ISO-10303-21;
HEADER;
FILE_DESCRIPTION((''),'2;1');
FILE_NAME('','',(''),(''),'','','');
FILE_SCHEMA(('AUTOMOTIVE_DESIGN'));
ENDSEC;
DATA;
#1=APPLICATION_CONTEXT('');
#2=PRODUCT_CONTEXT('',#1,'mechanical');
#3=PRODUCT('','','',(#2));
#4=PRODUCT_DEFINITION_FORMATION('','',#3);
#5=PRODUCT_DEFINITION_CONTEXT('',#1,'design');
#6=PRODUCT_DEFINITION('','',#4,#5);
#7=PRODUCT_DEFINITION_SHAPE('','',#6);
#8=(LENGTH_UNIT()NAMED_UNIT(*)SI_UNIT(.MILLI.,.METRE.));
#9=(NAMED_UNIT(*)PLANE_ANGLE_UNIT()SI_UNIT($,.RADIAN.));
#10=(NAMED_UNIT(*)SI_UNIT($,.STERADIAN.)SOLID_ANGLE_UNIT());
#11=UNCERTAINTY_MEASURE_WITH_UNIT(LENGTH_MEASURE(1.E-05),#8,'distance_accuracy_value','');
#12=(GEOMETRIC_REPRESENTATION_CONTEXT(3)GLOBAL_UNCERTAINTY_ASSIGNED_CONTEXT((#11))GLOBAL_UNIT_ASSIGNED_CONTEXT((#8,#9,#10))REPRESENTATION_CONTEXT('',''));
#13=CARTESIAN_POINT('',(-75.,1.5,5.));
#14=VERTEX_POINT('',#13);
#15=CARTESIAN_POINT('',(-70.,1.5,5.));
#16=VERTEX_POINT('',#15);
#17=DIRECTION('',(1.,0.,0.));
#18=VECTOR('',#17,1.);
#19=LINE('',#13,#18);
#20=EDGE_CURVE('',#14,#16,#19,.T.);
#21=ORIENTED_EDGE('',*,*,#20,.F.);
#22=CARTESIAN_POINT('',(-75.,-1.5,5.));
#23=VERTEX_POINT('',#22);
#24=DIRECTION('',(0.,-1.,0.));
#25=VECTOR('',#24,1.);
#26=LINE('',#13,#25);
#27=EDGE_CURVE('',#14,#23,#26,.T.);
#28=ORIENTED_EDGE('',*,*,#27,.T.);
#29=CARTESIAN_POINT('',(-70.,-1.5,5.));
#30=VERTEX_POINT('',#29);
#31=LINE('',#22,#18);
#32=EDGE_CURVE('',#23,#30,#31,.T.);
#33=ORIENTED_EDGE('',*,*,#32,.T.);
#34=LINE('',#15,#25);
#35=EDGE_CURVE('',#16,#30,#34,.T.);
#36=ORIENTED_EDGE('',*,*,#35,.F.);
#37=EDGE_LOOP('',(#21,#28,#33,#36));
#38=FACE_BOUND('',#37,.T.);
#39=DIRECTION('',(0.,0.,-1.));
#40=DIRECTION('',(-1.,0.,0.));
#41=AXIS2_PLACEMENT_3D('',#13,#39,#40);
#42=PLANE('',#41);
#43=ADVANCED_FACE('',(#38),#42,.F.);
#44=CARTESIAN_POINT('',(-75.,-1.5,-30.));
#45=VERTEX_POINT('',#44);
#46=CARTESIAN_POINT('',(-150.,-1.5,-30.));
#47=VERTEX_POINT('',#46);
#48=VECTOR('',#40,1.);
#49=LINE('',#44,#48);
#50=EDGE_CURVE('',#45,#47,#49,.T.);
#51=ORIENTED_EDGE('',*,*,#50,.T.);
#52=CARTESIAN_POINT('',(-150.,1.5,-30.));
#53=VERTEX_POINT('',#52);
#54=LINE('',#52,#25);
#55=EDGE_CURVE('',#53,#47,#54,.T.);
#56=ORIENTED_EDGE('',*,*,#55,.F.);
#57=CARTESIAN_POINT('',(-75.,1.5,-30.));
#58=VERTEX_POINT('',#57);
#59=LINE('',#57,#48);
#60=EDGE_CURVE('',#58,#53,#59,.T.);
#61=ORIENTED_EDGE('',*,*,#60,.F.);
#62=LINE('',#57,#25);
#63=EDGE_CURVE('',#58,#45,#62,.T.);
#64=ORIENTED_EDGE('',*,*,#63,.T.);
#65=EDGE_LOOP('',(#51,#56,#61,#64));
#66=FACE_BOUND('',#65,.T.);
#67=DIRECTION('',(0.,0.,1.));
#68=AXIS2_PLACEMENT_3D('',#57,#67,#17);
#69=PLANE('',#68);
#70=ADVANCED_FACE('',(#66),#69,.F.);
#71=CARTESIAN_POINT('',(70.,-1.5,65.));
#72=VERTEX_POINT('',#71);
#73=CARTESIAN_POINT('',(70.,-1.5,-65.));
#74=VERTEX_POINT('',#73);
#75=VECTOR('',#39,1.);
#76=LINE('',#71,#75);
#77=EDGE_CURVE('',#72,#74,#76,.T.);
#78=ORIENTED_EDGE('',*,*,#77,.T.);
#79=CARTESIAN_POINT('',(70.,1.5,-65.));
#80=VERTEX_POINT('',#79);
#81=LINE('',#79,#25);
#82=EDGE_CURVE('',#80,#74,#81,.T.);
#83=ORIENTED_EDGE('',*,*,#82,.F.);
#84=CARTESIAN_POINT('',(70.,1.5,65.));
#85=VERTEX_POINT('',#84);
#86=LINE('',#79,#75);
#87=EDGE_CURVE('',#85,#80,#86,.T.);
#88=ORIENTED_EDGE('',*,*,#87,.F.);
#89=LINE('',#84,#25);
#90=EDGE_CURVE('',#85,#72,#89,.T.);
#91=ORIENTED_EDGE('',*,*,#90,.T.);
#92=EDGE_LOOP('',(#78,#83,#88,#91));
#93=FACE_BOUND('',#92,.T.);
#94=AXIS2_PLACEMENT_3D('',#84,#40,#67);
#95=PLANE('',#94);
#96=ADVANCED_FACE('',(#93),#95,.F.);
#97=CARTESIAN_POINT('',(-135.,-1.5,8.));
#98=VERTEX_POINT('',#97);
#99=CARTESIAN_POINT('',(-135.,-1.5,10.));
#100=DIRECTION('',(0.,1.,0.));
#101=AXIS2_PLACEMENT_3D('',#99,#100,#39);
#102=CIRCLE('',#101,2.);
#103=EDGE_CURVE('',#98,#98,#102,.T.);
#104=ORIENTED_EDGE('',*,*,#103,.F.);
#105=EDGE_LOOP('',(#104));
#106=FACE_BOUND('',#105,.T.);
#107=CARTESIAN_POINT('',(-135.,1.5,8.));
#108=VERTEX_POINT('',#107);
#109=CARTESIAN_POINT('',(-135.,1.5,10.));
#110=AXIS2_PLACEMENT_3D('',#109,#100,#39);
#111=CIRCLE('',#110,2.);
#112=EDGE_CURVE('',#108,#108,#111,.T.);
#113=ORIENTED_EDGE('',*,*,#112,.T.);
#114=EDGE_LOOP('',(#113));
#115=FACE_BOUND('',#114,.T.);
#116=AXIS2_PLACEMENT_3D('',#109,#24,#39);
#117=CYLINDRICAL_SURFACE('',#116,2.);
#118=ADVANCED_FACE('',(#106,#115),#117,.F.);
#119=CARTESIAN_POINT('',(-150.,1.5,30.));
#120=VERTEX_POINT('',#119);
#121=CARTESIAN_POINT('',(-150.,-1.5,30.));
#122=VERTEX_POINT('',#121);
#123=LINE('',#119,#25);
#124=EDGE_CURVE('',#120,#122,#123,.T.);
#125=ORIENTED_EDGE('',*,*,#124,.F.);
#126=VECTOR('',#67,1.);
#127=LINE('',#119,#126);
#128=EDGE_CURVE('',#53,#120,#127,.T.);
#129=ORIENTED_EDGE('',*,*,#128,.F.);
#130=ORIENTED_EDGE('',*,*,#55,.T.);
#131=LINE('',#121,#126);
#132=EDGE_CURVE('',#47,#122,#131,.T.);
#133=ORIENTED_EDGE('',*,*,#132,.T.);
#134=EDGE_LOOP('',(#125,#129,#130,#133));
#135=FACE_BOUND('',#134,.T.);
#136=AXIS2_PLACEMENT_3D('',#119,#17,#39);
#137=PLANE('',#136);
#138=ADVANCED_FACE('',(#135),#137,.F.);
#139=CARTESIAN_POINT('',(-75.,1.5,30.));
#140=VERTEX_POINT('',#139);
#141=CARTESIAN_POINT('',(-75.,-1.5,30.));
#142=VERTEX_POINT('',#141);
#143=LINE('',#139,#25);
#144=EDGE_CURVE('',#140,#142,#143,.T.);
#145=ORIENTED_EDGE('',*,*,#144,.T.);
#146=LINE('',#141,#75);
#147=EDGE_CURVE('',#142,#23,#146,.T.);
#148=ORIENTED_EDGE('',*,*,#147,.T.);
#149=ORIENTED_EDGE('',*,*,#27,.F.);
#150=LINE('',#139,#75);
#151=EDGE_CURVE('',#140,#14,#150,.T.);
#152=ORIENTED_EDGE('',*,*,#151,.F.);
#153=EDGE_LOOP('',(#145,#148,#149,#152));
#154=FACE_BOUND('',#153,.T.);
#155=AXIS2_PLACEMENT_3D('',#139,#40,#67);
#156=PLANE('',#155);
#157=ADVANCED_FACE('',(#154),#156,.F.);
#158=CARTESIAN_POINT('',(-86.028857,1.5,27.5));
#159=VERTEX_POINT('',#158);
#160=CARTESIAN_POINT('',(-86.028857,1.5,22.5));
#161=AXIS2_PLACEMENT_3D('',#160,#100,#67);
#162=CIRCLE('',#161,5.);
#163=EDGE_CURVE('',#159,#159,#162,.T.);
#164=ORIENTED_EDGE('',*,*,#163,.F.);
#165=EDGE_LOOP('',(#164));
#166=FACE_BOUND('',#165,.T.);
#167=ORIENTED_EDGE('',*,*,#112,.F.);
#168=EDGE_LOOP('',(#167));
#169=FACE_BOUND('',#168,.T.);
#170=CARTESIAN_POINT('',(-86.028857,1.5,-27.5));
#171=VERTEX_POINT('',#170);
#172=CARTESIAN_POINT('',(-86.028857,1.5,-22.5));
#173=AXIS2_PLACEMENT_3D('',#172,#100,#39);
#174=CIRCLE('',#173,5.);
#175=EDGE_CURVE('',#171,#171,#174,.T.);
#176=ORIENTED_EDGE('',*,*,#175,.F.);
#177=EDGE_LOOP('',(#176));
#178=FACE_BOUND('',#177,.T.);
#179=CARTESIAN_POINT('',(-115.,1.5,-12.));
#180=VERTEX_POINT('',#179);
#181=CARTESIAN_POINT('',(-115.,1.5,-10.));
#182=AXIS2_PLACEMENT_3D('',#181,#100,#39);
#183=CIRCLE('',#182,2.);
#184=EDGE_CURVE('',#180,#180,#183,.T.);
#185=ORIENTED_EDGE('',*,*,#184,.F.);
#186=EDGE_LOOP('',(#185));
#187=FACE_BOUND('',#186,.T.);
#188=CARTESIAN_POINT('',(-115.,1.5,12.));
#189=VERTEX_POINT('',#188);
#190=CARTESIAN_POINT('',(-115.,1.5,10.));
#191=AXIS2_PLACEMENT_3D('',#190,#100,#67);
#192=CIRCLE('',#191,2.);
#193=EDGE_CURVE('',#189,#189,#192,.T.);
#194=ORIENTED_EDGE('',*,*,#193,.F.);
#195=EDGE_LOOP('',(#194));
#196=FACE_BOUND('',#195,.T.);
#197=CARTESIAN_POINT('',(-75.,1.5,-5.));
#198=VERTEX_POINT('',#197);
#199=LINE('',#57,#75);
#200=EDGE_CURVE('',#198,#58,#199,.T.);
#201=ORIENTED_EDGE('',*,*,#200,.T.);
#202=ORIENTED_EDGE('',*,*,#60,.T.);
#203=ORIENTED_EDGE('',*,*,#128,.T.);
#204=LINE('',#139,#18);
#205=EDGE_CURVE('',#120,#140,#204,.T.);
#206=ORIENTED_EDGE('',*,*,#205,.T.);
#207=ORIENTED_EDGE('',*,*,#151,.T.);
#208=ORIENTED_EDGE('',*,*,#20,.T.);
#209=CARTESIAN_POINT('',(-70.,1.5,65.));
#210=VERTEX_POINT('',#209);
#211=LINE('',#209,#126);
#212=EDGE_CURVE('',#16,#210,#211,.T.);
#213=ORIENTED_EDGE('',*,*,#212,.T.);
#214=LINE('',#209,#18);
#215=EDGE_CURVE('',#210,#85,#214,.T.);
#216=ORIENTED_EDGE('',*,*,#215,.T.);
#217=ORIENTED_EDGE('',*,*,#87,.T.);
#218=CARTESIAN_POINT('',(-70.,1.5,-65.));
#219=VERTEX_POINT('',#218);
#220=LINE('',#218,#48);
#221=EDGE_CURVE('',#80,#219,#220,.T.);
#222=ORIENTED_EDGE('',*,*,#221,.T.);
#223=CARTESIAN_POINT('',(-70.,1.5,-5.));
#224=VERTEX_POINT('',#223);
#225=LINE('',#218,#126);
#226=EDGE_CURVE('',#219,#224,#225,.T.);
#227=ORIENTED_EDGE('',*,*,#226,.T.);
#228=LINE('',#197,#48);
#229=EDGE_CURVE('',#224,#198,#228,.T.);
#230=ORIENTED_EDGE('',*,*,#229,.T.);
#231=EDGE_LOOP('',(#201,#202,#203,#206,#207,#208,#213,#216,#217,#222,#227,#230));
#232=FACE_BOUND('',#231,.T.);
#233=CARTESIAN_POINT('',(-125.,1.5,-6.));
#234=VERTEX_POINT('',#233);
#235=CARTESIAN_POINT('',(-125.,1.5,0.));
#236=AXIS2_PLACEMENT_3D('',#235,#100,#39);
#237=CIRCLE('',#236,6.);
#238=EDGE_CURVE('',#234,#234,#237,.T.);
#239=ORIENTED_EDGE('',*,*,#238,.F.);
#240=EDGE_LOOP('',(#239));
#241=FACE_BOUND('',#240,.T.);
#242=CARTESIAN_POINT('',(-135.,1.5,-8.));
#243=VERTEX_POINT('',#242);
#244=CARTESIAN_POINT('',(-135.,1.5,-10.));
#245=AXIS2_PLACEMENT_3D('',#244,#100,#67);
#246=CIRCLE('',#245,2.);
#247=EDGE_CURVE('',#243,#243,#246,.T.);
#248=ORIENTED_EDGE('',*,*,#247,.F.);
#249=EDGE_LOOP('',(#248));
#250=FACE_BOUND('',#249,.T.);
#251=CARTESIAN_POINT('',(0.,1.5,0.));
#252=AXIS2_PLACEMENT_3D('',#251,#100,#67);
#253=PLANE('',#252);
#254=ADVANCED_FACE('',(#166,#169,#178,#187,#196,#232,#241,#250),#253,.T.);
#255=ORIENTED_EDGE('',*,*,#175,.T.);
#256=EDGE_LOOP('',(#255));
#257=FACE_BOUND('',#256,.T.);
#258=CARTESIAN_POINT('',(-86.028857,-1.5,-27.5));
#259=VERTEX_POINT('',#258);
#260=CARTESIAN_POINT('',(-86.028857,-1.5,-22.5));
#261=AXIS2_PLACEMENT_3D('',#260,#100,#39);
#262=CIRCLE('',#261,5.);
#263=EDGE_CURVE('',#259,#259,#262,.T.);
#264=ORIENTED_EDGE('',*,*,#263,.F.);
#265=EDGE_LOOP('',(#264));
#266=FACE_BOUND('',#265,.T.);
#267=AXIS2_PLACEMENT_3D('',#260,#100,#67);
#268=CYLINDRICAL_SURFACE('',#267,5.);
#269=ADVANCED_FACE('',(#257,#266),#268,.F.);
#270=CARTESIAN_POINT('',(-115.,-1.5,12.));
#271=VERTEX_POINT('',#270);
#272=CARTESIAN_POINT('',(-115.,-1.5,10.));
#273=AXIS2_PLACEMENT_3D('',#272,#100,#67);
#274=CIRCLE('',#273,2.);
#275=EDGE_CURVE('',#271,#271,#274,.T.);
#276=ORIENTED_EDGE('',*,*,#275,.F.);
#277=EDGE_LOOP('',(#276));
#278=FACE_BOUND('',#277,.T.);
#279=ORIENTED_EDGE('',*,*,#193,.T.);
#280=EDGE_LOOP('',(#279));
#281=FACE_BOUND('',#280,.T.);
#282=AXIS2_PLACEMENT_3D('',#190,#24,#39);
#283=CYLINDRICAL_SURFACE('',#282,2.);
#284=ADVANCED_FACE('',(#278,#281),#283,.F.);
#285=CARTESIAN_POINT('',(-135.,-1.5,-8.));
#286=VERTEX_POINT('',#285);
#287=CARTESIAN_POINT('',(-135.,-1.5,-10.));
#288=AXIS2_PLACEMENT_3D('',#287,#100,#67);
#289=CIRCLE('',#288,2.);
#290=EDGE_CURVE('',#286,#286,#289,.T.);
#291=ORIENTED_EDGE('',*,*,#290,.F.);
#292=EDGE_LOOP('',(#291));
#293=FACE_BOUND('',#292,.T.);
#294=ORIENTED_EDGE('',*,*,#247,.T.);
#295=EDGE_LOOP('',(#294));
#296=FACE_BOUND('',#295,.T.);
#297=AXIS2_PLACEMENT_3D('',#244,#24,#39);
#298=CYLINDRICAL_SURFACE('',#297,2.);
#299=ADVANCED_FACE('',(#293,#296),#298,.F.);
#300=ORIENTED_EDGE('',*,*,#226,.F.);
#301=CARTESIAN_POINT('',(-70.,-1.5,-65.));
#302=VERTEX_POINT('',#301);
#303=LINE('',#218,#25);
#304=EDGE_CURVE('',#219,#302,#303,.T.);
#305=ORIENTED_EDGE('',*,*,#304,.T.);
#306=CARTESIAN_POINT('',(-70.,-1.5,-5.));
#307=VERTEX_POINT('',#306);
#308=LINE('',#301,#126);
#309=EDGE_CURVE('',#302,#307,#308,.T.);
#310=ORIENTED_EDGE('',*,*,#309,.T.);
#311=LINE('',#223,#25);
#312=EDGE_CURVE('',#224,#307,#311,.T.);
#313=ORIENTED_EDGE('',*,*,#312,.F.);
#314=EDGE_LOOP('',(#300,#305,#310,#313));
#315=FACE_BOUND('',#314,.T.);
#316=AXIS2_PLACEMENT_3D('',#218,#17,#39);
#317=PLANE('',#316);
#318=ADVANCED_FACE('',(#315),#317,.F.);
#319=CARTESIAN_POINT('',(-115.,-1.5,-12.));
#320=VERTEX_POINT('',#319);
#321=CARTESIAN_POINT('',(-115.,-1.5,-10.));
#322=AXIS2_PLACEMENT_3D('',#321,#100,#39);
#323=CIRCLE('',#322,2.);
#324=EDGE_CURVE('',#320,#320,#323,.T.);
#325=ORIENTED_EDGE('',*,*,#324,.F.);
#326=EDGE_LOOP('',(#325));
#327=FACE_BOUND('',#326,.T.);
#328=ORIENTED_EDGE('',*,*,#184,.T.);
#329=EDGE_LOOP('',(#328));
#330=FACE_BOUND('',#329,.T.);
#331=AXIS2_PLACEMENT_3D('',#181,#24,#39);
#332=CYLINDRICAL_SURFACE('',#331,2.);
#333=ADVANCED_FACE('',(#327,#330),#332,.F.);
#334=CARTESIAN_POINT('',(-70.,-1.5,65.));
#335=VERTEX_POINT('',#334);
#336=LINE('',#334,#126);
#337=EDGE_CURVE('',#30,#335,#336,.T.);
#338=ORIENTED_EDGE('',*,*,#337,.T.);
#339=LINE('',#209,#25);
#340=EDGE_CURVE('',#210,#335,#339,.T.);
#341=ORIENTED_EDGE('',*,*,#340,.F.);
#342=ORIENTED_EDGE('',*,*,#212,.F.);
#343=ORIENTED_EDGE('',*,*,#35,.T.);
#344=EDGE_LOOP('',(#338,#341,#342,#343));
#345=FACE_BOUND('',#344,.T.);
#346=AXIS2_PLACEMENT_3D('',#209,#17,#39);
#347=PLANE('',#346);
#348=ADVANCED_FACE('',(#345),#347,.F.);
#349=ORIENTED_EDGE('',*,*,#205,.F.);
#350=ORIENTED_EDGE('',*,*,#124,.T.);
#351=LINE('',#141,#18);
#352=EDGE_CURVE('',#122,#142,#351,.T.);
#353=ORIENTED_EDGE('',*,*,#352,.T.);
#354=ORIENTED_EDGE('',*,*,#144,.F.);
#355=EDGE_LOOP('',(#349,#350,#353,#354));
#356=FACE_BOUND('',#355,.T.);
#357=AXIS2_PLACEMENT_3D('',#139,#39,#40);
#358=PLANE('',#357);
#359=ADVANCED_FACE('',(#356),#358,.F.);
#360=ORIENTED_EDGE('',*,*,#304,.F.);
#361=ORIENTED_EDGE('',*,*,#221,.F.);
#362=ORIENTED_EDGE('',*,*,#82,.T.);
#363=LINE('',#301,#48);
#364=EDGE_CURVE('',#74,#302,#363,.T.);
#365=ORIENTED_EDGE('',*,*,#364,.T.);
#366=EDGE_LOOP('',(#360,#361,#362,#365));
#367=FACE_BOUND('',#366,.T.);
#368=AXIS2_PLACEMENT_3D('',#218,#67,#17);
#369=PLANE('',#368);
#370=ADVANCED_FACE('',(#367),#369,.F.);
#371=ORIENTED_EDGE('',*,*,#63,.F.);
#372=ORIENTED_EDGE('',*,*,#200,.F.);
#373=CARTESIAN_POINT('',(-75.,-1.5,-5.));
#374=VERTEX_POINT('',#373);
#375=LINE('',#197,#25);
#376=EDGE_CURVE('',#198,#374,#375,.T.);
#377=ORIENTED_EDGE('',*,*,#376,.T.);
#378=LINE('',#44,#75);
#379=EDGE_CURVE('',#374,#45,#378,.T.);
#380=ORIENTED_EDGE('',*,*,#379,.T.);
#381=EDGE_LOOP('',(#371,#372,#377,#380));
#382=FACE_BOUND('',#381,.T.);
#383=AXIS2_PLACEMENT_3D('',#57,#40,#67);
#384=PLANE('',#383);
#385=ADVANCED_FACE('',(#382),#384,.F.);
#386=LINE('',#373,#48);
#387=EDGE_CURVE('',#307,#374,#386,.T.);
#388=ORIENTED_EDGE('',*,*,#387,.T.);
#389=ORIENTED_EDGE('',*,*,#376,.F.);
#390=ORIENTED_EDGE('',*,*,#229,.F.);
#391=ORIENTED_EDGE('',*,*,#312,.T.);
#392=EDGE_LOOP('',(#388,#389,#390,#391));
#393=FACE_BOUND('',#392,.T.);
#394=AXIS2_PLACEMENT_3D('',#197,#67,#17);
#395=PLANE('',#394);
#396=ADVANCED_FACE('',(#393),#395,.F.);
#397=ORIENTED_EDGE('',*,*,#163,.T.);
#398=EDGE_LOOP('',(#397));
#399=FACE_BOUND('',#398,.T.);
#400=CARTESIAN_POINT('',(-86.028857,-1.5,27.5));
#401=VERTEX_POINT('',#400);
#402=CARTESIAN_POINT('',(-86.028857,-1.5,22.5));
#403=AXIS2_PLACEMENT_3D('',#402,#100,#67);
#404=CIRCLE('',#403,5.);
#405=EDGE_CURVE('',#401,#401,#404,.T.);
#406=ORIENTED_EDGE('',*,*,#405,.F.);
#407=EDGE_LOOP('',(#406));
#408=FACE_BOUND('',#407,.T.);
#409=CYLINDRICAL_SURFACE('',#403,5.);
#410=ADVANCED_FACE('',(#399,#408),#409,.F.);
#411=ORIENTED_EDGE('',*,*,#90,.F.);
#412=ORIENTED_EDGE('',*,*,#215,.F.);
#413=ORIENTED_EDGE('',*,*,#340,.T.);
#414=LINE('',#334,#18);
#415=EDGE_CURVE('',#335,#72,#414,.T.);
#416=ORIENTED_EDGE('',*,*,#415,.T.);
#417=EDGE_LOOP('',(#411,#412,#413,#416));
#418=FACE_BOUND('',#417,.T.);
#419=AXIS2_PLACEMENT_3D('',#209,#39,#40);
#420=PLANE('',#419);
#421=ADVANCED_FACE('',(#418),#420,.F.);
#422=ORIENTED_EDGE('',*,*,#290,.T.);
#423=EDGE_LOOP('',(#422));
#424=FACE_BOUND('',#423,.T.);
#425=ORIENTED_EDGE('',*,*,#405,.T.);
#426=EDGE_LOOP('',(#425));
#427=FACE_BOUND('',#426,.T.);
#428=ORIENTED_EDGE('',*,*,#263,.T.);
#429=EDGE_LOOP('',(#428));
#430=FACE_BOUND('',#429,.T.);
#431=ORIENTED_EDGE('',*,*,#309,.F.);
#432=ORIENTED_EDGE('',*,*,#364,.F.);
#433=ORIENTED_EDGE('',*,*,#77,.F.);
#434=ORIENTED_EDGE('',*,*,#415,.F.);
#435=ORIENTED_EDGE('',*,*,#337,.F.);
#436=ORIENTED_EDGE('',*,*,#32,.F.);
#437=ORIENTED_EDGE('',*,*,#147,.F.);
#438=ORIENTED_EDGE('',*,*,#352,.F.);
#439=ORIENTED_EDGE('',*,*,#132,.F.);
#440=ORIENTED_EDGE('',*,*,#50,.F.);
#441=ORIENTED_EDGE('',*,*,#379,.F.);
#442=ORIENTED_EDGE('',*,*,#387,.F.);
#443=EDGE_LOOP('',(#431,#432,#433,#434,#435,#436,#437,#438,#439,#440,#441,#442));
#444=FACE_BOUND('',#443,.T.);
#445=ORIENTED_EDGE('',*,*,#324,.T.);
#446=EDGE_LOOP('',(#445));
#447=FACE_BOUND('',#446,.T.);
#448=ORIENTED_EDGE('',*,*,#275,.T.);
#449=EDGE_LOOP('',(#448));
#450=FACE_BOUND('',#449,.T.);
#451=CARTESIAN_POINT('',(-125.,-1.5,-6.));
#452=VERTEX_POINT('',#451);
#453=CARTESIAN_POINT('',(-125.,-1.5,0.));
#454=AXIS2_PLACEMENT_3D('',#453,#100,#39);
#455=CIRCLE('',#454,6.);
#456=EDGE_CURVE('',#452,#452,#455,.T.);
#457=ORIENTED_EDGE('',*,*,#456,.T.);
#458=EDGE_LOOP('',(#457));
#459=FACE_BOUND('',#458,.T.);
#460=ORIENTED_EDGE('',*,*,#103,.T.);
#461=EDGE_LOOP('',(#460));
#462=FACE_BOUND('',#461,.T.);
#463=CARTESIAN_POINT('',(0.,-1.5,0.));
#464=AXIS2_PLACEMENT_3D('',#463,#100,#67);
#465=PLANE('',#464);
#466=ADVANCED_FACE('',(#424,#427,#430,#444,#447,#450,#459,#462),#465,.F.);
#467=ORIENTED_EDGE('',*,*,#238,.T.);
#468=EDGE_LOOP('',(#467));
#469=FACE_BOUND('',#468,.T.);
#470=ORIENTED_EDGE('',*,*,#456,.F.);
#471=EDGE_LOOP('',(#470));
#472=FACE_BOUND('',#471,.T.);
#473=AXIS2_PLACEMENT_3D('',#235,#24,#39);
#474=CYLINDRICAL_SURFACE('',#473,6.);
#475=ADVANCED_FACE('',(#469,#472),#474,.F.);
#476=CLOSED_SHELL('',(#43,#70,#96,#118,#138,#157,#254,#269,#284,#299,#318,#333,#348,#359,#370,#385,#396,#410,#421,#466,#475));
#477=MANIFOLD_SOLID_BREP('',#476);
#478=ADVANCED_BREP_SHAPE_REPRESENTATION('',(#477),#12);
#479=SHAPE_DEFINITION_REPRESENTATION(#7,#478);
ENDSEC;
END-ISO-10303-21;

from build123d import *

# Parameters (mm, degrees)
SKETCH1_R             = 6
SKETCH1_R_2           = 2
SKETCH1_R_3           = 7.5
BOSS_EXTRUDE1_DEPTH   = 1.5
SKETCH2_W             = 115.219632385
SKETCH2_H             = 145.344306737
CUT_EXTRUDE1_DEPTH    = 164.505351594
DELETEFACE1_START     = -1.5
DELETEFACE1_OUTLINE_R = 7.5
DELETEFACE1_DEPTH     = 3
SKETCH4_R             = 5
CUT_EXTRUDE2_DEPTH    = 164.505351594


# Read off the part's stored shape, not the designer's step: DeleteFace1
with BuildPart() as part:
    # Sketch1 → Boss-Extrude1 (new, symmetric)
    with BuildSketch(Plane(origin=(0, 0, 0), x_dir=(1, 0, 0), z_dir=(0, 1, 0))):
        Polygon((70, 65), (70, 5), (75, 5), (75, 30), (150, 30), (150, -30), (75, -30), (75, -5), (70, -5), (70, -65), (-70, -65), (-70, -5), (-75, -5), (-75, -30), (-150, -30), (-150, 30), (-75, 30), (-75, 5), (-70, 5), (-70, 65), align=None)
        with Locations(Location((125, 0, 0), (0, 0, 270))):
            Circle(SKETCH1_R, mode=Mode.SUBTRACT)
        with Locations(Location((115, 10, 0), (0, 0, 270))):
            Circle(SKETCH1_R_2, mode=Mode.SUBTRACT)
        with Locations(Location((135, 10, 0), (0, 0, 90))):
            Circle(SKETCH1_R_2, mode=Mode.SUBTRACT)
        with Locations(Location((135, -10, 0), (0, 0, 270))):
            Circle(SKETCH1_R_2, mode=Mode.SUBTRACT)
        with Locations(Location((115, -10, 0), (0, 0, 90))):
            Circle(SKETCH1_R_2, mode=Mode.SUBTRACT)
        with Locations(Location((-115, -10, 0), (0, 0, 270))):
            Circle(SKETCH1_R_2, mode=Mode.SUBTRACT)
        with Locations(Location((-135, -10, 0), (0, 0, 90))):
            Circle(SKETCH1_R_2, mode=Mode.SUBTRACT)
        with Locations(Location((-135, 10, 0), (0, 0, 270))):
            Circle(SKETCH1_R_2, mode=Mode.SUBTRACT)
        with Locations(Location((-125, 0, 0), (0, 0, 90))):
            Circle(SKETCH1_R, mode=Mode.SUBTRACT)
        with Locations(Location((-115, 10, 0), (0, 0, 90))):
            Circle(SKETCH1_R_2, mode=Mode.SUBTRACT)
        with Locations(Location((100, 0, 0), (0, 0, 270))):
            Circle(SKETCH1_R_3, mode=Mode.SUBTRACT)
        with Locations(Location((-100, 0, 0), (0, 0, 90))):
            Circle(SKETCH1_R_3, mode=Mode.SUBTRACT)
    extrude(amount=BOSS_EXTRUDE1_DEPTH, both=True)

    # Sketch2 → Cut-Extrude1 (cut, through all)
    with BuildSketch(Plane(origin=(0, 1.5, 0), x_dir=(1, 0, 0), z_dir=(0, 1, 0))):
        with Locations((127.609816193, -7.672153369)):
            Rectangle(SKETCH2_W, SKETCH2_H)
    extrude(amount=-CUT_EXTRUDE1_DEPTH, mode=Mode.SUBTRACT)

    # DeleteFace1 outline → DeleteFace1 (add)
    with BuildSketch(Plane(origin=(0, 0, 0), x_dir=(1, 0, 0), z_dir=(0, 1, 0)).offset(DELETEFACE1_START)):
        with Locations((-100, 0)):
            Circle(DELETEFACE1_OUTLINE_R)
    extrude(amount=DELETEFACE1_DEPTH)

    # Sketch4 → Cut-Extrude2 (cut, through all)
    with BuildSketch(Plane(origin=(0, 1.5, 0), x_dir=(1, 0, 0), z_dir=(0, 1, 0))):
        with Locations(Location((-86.02885683, -22.5, 0), (0, 0, 270))):
            Circle(SKETCH4_R)
        with Locations(Location((-86.02885683, 22.5, 0), (0, 0, 90))):
            Circle(SKETCH4_R)
    extrude(amount=-CUT_EXTRUDE2_DEPTH, mode=Mode.SUBTRACT)


solid = part.part
